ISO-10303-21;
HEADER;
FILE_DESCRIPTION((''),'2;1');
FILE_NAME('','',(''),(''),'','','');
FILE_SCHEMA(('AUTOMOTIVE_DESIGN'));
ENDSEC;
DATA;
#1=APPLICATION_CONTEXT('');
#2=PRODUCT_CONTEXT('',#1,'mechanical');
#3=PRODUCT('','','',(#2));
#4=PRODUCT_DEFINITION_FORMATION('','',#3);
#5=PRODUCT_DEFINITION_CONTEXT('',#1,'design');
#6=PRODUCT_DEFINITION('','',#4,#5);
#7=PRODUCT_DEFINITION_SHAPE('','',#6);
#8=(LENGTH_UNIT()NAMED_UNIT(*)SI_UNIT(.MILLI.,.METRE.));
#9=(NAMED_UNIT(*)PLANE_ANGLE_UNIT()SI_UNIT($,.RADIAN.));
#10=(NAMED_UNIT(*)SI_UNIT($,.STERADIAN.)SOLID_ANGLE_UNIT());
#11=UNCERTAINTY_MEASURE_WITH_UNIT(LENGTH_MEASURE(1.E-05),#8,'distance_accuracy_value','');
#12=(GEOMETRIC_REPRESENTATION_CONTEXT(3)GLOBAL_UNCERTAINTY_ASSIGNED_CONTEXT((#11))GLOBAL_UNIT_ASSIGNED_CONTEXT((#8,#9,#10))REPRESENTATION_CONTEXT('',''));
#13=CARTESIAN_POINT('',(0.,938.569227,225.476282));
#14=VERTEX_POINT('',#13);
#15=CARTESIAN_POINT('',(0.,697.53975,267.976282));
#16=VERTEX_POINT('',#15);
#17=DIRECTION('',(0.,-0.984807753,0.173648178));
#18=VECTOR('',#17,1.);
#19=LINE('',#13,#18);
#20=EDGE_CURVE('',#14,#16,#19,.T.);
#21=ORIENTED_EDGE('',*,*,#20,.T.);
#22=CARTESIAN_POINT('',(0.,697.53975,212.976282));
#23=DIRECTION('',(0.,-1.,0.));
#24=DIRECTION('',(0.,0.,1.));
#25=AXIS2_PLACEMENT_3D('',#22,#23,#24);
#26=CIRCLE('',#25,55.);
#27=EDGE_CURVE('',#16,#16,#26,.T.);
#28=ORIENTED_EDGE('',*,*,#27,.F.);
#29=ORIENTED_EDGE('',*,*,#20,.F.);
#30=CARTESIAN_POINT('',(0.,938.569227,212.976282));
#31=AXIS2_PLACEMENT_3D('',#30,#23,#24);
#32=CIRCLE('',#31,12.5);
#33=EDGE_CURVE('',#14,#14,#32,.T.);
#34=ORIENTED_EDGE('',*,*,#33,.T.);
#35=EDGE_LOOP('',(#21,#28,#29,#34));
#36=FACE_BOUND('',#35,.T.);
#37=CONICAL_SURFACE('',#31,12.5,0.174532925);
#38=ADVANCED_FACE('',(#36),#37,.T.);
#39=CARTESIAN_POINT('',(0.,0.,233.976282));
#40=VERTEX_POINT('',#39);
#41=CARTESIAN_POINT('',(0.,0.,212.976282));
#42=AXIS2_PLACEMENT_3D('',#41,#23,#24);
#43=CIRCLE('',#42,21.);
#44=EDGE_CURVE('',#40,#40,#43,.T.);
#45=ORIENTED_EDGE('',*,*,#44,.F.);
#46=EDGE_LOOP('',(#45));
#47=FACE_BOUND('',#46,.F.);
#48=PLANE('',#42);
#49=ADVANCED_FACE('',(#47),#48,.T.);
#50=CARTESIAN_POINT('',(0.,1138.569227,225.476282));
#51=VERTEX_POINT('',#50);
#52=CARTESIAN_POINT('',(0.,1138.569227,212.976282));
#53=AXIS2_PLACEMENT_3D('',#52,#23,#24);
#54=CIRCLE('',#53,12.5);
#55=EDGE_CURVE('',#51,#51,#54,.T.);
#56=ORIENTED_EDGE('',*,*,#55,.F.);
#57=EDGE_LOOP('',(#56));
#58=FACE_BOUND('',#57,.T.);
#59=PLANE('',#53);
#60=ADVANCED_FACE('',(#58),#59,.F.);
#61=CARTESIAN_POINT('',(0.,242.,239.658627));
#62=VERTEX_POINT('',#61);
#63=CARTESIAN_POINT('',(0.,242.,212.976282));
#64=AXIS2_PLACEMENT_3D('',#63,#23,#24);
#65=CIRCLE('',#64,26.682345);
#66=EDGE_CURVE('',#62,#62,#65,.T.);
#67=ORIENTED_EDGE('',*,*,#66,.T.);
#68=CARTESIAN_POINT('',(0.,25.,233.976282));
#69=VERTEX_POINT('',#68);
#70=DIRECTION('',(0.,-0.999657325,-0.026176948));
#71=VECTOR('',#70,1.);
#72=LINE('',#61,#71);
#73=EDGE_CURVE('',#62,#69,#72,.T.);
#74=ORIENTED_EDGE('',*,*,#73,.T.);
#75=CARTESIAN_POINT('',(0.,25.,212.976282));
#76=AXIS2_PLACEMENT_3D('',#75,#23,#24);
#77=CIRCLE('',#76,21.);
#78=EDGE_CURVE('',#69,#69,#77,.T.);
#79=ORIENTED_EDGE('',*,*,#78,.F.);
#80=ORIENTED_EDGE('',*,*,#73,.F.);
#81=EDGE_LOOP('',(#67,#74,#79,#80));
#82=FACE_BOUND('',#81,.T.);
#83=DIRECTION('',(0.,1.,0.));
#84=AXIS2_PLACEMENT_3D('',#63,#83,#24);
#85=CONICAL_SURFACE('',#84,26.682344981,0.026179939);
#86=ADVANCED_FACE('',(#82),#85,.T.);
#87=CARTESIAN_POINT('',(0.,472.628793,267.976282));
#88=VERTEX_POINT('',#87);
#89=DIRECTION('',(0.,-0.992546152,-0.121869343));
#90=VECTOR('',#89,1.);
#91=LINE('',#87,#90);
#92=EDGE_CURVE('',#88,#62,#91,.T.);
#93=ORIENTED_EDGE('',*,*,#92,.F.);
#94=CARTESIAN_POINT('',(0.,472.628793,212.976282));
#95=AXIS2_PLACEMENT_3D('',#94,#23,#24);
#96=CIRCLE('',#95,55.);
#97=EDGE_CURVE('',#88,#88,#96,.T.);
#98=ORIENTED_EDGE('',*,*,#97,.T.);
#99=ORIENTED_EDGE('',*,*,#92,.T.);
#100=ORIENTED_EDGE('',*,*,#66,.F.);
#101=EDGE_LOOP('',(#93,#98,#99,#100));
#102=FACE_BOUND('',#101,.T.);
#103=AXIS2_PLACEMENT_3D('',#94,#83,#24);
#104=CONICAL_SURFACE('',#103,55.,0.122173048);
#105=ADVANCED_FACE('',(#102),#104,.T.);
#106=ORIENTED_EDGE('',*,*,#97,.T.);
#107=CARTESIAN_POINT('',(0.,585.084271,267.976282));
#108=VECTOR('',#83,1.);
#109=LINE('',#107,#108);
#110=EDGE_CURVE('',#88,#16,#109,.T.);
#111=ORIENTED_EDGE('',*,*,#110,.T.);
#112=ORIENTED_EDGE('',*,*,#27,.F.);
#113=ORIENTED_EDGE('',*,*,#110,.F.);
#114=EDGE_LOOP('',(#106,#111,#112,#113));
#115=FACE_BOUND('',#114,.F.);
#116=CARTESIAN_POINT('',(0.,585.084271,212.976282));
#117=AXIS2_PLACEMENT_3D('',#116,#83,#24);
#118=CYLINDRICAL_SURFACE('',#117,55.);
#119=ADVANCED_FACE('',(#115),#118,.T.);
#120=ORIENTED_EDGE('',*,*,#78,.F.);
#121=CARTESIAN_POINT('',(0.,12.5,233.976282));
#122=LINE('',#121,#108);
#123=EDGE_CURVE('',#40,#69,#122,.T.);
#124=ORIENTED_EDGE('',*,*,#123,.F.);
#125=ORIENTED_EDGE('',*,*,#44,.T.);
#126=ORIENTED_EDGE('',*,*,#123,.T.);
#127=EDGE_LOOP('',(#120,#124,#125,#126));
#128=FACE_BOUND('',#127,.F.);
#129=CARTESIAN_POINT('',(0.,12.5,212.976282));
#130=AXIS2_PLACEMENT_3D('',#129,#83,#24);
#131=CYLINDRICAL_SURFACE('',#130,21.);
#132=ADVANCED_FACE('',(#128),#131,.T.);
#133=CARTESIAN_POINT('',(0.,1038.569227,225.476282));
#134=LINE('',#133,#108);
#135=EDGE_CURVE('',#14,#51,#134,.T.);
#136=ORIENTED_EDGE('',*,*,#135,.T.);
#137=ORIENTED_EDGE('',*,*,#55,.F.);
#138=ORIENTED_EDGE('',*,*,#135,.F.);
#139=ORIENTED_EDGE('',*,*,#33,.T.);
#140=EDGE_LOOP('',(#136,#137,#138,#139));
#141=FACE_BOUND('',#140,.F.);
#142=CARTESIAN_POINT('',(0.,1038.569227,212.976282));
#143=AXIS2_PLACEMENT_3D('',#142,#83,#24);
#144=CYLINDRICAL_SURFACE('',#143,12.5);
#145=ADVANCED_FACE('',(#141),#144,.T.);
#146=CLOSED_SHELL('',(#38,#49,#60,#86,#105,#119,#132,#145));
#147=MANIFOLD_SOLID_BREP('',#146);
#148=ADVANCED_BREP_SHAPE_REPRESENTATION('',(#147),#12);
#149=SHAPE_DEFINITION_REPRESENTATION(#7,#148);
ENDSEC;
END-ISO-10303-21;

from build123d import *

# Parameters (mm, degrees)
F0_W   = 25
F0_H   = 21
F0_W_2 = 224.9109574539
F0_H_2 = 55
F0_W_3 = 200
F0_H_3 = 12.5


# Not quite as in the source:
# - the program builds the solid bodies; features that only make, move or delete a surface that nothing else refers to are left out


with BuildPart() as f1:
    # F0 (on Right) → F1 (revolve)
    with BuildSketch(Plane.YZ):
        with Locations((12.5, 223.4762815751)):
            Rectangle(F0_W, F0_H)
        Polygon((25, 233.9762815751), (25, 212.9762815751), (242, 212.9762815751), (242, 239.6586265556), align=None)
        Polygon((242, 239.6586265556), (242, 212.9762815751), (344.0616714118, 212.9762815751), (344.0616714118, 252.1902240649), align=None)
        Polygon((344.0616714118, 252.1902240649), (344.0616714118, 212.9762815751), (472.6287925066, 212.9762815751), (472.6287925066, 267.9762815751), align=None)
        with Locations((585.0842712335, 240.4762815751)):
            Rectangle(F0_W_2, F0_H_2)
        Polygon((697.5397499605, 267.9762815751), (697.5397499605, 212.9762815751), (853.5, 212.9762815751), (853.5, 240.4762815751), align=None)
        Polygon((853.5, 240.4762815751), (853.5, 212.9762815751), (938.5692272943, 212.9762815751), (938.5692272943, 225.4762815751), align=None)
        with Locations((1038.5692272943, 219.2262815751)):
            Rectangle(F0_W_3, F0_H_3)
    revolve(axis=Axis((0, -32.5, 212.9762815751), (0, -1, 0)))


solid = f1.part
